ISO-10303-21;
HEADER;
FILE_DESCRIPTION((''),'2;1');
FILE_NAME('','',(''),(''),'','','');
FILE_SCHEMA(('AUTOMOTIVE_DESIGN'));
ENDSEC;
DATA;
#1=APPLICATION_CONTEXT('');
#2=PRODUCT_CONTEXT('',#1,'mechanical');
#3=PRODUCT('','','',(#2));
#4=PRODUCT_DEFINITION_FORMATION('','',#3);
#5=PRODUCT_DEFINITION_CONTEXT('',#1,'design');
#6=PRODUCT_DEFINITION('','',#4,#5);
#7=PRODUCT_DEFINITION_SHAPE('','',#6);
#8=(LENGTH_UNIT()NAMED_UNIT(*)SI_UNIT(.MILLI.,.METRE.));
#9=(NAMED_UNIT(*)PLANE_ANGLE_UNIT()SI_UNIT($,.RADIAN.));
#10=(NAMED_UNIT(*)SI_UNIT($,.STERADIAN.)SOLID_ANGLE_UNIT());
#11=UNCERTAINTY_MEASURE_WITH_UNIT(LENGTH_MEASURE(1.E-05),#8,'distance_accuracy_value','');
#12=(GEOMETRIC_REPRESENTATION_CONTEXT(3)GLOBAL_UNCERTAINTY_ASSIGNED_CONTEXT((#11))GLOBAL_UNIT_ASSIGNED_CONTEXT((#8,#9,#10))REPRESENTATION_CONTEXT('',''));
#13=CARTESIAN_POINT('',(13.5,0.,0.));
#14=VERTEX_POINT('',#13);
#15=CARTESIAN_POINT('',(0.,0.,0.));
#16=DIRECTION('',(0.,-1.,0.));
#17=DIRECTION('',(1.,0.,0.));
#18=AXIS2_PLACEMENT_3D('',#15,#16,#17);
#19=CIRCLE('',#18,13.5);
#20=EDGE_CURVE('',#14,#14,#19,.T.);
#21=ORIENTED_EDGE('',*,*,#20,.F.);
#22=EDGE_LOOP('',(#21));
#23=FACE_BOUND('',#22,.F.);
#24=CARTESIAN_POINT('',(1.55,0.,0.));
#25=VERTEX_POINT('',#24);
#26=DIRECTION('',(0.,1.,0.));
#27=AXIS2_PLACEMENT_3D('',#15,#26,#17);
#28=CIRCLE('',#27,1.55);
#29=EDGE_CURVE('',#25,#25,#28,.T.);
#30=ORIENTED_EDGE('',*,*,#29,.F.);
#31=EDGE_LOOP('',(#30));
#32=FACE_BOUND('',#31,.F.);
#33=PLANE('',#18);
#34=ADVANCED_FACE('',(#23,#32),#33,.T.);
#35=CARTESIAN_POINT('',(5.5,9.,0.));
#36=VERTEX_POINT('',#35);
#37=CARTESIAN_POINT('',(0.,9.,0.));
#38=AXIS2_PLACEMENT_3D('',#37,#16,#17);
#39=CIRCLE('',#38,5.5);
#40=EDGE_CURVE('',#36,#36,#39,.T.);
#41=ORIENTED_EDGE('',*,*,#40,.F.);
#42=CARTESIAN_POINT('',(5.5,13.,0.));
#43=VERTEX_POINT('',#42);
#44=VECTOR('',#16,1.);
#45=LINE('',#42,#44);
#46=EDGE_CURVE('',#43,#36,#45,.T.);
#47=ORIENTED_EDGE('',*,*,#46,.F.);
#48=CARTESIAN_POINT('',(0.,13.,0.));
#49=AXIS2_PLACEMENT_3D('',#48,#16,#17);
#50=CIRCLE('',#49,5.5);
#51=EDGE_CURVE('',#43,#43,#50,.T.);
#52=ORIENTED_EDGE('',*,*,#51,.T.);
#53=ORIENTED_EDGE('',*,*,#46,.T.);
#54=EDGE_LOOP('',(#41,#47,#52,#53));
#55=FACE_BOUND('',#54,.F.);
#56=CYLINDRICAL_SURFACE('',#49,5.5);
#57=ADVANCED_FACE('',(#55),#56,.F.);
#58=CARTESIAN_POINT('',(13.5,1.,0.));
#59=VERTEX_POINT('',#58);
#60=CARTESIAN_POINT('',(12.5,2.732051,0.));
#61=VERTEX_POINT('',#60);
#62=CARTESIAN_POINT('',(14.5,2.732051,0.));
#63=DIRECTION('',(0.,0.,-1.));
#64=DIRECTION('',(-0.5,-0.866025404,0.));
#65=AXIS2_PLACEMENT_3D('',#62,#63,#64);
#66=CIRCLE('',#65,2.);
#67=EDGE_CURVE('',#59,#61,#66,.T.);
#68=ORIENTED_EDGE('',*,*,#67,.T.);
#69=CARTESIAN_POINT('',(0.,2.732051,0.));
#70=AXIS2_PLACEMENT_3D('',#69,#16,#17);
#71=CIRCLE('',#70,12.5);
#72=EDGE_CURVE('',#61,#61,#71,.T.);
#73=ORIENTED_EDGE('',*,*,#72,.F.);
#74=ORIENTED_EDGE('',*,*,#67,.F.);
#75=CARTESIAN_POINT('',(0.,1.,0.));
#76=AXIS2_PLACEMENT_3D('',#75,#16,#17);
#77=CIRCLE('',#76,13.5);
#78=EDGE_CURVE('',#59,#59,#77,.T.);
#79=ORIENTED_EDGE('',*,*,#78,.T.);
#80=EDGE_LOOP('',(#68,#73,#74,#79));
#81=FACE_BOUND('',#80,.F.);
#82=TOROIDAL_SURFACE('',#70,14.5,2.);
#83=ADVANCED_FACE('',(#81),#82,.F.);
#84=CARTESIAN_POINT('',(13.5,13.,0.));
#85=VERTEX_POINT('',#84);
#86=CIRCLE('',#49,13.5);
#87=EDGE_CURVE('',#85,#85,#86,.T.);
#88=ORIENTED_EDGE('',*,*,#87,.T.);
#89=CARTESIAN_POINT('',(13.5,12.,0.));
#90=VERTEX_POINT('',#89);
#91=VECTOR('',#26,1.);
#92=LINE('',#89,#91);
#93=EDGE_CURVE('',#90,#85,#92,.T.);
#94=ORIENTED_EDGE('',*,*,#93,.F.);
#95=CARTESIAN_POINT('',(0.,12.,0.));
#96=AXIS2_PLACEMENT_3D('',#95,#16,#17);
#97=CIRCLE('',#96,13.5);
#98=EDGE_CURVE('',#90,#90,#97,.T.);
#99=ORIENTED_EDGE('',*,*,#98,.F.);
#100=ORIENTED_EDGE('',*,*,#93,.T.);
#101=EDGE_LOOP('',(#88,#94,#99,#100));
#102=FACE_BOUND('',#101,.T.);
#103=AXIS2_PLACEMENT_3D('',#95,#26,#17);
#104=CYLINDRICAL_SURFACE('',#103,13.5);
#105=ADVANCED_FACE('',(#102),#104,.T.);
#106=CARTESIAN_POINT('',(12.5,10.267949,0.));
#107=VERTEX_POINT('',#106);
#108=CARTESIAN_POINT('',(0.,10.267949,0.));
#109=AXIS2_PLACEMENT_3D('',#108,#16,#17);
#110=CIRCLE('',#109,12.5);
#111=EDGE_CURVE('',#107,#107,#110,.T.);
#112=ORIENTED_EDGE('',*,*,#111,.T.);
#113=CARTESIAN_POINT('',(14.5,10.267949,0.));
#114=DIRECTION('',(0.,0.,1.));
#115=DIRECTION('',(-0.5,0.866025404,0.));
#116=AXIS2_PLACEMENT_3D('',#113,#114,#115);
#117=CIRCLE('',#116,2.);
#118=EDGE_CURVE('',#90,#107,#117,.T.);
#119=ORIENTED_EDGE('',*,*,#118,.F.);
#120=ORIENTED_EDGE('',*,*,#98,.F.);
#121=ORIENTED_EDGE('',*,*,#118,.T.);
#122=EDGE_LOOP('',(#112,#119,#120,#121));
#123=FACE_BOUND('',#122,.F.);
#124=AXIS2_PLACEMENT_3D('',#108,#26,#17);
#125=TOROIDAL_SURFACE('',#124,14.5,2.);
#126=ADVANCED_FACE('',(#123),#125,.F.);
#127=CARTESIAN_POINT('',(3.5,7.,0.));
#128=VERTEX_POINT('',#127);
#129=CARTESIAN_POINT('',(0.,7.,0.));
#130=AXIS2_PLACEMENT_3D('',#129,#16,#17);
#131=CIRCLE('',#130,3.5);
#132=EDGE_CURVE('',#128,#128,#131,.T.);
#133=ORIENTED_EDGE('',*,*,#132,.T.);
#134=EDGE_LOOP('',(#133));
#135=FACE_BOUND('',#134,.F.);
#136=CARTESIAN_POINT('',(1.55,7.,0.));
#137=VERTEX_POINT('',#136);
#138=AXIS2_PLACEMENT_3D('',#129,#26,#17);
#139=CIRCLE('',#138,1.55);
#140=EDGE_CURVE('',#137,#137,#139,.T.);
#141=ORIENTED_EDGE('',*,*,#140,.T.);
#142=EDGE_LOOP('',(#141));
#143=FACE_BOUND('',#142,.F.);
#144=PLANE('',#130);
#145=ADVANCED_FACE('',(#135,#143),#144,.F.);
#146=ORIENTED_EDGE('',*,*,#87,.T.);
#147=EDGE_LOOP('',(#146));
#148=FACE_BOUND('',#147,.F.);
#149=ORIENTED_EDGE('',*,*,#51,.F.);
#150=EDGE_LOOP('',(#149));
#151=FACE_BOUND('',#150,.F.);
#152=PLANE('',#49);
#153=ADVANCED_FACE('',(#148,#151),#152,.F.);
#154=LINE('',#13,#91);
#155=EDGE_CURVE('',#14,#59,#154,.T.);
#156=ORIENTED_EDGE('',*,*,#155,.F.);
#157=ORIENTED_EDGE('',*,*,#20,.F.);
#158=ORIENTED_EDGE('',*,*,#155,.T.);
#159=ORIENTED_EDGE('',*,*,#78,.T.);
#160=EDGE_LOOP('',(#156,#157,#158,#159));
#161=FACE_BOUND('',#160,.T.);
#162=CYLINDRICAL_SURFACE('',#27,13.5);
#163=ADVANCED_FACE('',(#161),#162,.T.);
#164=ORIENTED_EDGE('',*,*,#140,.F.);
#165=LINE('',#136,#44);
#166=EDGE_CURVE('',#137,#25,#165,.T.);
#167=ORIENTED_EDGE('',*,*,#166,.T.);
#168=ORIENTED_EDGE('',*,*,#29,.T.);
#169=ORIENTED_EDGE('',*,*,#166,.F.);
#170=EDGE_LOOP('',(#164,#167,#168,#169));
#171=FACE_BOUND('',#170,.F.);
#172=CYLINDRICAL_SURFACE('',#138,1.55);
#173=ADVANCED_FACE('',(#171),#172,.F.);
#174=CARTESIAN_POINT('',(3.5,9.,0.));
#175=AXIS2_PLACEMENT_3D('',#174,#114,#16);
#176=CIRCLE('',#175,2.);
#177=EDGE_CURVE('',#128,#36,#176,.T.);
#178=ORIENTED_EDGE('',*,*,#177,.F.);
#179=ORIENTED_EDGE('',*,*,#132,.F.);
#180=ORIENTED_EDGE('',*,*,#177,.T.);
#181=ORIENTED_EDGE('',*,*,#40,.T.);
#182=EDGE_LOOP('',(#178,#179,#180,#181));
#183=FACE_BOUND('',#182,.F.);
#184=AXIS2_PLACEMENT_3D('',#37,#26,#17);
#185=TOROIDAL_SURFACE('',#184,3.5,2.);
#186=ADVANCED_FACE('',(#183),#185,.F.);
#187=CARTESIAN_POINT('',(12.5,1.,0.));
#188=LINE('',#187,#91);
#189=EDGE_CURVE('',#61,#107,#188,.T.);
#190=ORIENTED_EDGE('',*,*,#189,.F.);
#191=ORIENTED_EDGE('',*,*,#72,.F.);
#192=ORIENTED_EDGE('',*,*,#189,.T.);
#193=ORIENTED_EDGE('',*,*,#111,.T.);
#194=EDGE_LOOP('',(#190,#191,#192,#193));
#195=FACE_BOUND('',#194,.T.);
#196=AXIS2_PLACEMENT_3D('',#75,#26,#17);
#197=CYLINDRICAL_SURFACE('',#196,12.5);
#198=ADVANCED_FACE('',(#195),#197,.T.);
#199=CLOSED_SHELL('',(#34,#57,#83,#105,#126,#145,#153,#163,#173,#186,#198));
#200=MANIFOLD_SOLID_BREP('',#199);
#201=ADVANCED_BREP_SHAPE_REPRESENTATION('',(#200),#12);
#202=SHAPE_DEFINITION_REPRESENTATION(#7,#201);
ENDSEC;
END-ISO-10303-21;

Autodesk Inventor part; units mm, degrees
ref_plane "YZ Plane" through (0, 0, 0) normal (1, 0, 0) x (0, 1, 0)
ref_plane "XZ Plane" through (0, 0, 0) normal (0, 1, 0) x (-1, 0, 0)
ref_plane "XY Plane" through (0, 0, 0) normal (0, 0, 1) x (1, 0, 0)
sketch "Szkic1" plane through (0, 0, 0) normal (0, 0, 1) x (1, 0, 0)
  line L0 (0, 0) -> (13.5, 0)
  line L1 (13.5, 0) -> (13.5, 1)
  line L2 (13.5, 1) -> (12.5, 1)
  line L3 (12.5, 1) -> (12.5, 12)
  line L4 (12.5, 12) -> (13.5, 12)
  line L5 (13.5, 12) -> (13.5, 13)
  line L6 (13.5, 13) -> (5.5, 13)
  line L7 (5.5, 13) -> (5.5, 7)
  line L8 (5.5, 7) -> (3.1, 7)
  line L9 (3.1, 7) -> (0, 7)
  line L10 (0, 7) -> (0, 0)
  dimension "d0" = 13.5
  dimension "d1" = 1
  dimension "d2" = 1
  dimension "d3" = 11
  dimension "d4" = 1
  dimension "d5" = 1
  dimension "d6" = 8
  dimension "d7" = 6
  dimension "d8" = 2.4
revolve "Obrót1" add sketch "Szkic1" angle 360 about axis through (0, 7, 0) along (0, -1, 0)
sketch "Szkic2" plane through (0, 7, 0) normal (0, 1, 0) x (1, 0, 0)
  circle A0 centre (0, 0) radius 5.5 projected
  circle A1 centre (0, 0) radius 1.55
  dimension "d10" = 3.1
extrude "Wyciągnięcie proste1" cut sketch "Szkic2" against normal blind 10 contours A1
fillet "Zaokrąglenie1" radius 2 3 edges at (-12.5, 1, 0) (-12.5, 12, 0) (-5.5, 7, 0)
properties part number "Kolo"
